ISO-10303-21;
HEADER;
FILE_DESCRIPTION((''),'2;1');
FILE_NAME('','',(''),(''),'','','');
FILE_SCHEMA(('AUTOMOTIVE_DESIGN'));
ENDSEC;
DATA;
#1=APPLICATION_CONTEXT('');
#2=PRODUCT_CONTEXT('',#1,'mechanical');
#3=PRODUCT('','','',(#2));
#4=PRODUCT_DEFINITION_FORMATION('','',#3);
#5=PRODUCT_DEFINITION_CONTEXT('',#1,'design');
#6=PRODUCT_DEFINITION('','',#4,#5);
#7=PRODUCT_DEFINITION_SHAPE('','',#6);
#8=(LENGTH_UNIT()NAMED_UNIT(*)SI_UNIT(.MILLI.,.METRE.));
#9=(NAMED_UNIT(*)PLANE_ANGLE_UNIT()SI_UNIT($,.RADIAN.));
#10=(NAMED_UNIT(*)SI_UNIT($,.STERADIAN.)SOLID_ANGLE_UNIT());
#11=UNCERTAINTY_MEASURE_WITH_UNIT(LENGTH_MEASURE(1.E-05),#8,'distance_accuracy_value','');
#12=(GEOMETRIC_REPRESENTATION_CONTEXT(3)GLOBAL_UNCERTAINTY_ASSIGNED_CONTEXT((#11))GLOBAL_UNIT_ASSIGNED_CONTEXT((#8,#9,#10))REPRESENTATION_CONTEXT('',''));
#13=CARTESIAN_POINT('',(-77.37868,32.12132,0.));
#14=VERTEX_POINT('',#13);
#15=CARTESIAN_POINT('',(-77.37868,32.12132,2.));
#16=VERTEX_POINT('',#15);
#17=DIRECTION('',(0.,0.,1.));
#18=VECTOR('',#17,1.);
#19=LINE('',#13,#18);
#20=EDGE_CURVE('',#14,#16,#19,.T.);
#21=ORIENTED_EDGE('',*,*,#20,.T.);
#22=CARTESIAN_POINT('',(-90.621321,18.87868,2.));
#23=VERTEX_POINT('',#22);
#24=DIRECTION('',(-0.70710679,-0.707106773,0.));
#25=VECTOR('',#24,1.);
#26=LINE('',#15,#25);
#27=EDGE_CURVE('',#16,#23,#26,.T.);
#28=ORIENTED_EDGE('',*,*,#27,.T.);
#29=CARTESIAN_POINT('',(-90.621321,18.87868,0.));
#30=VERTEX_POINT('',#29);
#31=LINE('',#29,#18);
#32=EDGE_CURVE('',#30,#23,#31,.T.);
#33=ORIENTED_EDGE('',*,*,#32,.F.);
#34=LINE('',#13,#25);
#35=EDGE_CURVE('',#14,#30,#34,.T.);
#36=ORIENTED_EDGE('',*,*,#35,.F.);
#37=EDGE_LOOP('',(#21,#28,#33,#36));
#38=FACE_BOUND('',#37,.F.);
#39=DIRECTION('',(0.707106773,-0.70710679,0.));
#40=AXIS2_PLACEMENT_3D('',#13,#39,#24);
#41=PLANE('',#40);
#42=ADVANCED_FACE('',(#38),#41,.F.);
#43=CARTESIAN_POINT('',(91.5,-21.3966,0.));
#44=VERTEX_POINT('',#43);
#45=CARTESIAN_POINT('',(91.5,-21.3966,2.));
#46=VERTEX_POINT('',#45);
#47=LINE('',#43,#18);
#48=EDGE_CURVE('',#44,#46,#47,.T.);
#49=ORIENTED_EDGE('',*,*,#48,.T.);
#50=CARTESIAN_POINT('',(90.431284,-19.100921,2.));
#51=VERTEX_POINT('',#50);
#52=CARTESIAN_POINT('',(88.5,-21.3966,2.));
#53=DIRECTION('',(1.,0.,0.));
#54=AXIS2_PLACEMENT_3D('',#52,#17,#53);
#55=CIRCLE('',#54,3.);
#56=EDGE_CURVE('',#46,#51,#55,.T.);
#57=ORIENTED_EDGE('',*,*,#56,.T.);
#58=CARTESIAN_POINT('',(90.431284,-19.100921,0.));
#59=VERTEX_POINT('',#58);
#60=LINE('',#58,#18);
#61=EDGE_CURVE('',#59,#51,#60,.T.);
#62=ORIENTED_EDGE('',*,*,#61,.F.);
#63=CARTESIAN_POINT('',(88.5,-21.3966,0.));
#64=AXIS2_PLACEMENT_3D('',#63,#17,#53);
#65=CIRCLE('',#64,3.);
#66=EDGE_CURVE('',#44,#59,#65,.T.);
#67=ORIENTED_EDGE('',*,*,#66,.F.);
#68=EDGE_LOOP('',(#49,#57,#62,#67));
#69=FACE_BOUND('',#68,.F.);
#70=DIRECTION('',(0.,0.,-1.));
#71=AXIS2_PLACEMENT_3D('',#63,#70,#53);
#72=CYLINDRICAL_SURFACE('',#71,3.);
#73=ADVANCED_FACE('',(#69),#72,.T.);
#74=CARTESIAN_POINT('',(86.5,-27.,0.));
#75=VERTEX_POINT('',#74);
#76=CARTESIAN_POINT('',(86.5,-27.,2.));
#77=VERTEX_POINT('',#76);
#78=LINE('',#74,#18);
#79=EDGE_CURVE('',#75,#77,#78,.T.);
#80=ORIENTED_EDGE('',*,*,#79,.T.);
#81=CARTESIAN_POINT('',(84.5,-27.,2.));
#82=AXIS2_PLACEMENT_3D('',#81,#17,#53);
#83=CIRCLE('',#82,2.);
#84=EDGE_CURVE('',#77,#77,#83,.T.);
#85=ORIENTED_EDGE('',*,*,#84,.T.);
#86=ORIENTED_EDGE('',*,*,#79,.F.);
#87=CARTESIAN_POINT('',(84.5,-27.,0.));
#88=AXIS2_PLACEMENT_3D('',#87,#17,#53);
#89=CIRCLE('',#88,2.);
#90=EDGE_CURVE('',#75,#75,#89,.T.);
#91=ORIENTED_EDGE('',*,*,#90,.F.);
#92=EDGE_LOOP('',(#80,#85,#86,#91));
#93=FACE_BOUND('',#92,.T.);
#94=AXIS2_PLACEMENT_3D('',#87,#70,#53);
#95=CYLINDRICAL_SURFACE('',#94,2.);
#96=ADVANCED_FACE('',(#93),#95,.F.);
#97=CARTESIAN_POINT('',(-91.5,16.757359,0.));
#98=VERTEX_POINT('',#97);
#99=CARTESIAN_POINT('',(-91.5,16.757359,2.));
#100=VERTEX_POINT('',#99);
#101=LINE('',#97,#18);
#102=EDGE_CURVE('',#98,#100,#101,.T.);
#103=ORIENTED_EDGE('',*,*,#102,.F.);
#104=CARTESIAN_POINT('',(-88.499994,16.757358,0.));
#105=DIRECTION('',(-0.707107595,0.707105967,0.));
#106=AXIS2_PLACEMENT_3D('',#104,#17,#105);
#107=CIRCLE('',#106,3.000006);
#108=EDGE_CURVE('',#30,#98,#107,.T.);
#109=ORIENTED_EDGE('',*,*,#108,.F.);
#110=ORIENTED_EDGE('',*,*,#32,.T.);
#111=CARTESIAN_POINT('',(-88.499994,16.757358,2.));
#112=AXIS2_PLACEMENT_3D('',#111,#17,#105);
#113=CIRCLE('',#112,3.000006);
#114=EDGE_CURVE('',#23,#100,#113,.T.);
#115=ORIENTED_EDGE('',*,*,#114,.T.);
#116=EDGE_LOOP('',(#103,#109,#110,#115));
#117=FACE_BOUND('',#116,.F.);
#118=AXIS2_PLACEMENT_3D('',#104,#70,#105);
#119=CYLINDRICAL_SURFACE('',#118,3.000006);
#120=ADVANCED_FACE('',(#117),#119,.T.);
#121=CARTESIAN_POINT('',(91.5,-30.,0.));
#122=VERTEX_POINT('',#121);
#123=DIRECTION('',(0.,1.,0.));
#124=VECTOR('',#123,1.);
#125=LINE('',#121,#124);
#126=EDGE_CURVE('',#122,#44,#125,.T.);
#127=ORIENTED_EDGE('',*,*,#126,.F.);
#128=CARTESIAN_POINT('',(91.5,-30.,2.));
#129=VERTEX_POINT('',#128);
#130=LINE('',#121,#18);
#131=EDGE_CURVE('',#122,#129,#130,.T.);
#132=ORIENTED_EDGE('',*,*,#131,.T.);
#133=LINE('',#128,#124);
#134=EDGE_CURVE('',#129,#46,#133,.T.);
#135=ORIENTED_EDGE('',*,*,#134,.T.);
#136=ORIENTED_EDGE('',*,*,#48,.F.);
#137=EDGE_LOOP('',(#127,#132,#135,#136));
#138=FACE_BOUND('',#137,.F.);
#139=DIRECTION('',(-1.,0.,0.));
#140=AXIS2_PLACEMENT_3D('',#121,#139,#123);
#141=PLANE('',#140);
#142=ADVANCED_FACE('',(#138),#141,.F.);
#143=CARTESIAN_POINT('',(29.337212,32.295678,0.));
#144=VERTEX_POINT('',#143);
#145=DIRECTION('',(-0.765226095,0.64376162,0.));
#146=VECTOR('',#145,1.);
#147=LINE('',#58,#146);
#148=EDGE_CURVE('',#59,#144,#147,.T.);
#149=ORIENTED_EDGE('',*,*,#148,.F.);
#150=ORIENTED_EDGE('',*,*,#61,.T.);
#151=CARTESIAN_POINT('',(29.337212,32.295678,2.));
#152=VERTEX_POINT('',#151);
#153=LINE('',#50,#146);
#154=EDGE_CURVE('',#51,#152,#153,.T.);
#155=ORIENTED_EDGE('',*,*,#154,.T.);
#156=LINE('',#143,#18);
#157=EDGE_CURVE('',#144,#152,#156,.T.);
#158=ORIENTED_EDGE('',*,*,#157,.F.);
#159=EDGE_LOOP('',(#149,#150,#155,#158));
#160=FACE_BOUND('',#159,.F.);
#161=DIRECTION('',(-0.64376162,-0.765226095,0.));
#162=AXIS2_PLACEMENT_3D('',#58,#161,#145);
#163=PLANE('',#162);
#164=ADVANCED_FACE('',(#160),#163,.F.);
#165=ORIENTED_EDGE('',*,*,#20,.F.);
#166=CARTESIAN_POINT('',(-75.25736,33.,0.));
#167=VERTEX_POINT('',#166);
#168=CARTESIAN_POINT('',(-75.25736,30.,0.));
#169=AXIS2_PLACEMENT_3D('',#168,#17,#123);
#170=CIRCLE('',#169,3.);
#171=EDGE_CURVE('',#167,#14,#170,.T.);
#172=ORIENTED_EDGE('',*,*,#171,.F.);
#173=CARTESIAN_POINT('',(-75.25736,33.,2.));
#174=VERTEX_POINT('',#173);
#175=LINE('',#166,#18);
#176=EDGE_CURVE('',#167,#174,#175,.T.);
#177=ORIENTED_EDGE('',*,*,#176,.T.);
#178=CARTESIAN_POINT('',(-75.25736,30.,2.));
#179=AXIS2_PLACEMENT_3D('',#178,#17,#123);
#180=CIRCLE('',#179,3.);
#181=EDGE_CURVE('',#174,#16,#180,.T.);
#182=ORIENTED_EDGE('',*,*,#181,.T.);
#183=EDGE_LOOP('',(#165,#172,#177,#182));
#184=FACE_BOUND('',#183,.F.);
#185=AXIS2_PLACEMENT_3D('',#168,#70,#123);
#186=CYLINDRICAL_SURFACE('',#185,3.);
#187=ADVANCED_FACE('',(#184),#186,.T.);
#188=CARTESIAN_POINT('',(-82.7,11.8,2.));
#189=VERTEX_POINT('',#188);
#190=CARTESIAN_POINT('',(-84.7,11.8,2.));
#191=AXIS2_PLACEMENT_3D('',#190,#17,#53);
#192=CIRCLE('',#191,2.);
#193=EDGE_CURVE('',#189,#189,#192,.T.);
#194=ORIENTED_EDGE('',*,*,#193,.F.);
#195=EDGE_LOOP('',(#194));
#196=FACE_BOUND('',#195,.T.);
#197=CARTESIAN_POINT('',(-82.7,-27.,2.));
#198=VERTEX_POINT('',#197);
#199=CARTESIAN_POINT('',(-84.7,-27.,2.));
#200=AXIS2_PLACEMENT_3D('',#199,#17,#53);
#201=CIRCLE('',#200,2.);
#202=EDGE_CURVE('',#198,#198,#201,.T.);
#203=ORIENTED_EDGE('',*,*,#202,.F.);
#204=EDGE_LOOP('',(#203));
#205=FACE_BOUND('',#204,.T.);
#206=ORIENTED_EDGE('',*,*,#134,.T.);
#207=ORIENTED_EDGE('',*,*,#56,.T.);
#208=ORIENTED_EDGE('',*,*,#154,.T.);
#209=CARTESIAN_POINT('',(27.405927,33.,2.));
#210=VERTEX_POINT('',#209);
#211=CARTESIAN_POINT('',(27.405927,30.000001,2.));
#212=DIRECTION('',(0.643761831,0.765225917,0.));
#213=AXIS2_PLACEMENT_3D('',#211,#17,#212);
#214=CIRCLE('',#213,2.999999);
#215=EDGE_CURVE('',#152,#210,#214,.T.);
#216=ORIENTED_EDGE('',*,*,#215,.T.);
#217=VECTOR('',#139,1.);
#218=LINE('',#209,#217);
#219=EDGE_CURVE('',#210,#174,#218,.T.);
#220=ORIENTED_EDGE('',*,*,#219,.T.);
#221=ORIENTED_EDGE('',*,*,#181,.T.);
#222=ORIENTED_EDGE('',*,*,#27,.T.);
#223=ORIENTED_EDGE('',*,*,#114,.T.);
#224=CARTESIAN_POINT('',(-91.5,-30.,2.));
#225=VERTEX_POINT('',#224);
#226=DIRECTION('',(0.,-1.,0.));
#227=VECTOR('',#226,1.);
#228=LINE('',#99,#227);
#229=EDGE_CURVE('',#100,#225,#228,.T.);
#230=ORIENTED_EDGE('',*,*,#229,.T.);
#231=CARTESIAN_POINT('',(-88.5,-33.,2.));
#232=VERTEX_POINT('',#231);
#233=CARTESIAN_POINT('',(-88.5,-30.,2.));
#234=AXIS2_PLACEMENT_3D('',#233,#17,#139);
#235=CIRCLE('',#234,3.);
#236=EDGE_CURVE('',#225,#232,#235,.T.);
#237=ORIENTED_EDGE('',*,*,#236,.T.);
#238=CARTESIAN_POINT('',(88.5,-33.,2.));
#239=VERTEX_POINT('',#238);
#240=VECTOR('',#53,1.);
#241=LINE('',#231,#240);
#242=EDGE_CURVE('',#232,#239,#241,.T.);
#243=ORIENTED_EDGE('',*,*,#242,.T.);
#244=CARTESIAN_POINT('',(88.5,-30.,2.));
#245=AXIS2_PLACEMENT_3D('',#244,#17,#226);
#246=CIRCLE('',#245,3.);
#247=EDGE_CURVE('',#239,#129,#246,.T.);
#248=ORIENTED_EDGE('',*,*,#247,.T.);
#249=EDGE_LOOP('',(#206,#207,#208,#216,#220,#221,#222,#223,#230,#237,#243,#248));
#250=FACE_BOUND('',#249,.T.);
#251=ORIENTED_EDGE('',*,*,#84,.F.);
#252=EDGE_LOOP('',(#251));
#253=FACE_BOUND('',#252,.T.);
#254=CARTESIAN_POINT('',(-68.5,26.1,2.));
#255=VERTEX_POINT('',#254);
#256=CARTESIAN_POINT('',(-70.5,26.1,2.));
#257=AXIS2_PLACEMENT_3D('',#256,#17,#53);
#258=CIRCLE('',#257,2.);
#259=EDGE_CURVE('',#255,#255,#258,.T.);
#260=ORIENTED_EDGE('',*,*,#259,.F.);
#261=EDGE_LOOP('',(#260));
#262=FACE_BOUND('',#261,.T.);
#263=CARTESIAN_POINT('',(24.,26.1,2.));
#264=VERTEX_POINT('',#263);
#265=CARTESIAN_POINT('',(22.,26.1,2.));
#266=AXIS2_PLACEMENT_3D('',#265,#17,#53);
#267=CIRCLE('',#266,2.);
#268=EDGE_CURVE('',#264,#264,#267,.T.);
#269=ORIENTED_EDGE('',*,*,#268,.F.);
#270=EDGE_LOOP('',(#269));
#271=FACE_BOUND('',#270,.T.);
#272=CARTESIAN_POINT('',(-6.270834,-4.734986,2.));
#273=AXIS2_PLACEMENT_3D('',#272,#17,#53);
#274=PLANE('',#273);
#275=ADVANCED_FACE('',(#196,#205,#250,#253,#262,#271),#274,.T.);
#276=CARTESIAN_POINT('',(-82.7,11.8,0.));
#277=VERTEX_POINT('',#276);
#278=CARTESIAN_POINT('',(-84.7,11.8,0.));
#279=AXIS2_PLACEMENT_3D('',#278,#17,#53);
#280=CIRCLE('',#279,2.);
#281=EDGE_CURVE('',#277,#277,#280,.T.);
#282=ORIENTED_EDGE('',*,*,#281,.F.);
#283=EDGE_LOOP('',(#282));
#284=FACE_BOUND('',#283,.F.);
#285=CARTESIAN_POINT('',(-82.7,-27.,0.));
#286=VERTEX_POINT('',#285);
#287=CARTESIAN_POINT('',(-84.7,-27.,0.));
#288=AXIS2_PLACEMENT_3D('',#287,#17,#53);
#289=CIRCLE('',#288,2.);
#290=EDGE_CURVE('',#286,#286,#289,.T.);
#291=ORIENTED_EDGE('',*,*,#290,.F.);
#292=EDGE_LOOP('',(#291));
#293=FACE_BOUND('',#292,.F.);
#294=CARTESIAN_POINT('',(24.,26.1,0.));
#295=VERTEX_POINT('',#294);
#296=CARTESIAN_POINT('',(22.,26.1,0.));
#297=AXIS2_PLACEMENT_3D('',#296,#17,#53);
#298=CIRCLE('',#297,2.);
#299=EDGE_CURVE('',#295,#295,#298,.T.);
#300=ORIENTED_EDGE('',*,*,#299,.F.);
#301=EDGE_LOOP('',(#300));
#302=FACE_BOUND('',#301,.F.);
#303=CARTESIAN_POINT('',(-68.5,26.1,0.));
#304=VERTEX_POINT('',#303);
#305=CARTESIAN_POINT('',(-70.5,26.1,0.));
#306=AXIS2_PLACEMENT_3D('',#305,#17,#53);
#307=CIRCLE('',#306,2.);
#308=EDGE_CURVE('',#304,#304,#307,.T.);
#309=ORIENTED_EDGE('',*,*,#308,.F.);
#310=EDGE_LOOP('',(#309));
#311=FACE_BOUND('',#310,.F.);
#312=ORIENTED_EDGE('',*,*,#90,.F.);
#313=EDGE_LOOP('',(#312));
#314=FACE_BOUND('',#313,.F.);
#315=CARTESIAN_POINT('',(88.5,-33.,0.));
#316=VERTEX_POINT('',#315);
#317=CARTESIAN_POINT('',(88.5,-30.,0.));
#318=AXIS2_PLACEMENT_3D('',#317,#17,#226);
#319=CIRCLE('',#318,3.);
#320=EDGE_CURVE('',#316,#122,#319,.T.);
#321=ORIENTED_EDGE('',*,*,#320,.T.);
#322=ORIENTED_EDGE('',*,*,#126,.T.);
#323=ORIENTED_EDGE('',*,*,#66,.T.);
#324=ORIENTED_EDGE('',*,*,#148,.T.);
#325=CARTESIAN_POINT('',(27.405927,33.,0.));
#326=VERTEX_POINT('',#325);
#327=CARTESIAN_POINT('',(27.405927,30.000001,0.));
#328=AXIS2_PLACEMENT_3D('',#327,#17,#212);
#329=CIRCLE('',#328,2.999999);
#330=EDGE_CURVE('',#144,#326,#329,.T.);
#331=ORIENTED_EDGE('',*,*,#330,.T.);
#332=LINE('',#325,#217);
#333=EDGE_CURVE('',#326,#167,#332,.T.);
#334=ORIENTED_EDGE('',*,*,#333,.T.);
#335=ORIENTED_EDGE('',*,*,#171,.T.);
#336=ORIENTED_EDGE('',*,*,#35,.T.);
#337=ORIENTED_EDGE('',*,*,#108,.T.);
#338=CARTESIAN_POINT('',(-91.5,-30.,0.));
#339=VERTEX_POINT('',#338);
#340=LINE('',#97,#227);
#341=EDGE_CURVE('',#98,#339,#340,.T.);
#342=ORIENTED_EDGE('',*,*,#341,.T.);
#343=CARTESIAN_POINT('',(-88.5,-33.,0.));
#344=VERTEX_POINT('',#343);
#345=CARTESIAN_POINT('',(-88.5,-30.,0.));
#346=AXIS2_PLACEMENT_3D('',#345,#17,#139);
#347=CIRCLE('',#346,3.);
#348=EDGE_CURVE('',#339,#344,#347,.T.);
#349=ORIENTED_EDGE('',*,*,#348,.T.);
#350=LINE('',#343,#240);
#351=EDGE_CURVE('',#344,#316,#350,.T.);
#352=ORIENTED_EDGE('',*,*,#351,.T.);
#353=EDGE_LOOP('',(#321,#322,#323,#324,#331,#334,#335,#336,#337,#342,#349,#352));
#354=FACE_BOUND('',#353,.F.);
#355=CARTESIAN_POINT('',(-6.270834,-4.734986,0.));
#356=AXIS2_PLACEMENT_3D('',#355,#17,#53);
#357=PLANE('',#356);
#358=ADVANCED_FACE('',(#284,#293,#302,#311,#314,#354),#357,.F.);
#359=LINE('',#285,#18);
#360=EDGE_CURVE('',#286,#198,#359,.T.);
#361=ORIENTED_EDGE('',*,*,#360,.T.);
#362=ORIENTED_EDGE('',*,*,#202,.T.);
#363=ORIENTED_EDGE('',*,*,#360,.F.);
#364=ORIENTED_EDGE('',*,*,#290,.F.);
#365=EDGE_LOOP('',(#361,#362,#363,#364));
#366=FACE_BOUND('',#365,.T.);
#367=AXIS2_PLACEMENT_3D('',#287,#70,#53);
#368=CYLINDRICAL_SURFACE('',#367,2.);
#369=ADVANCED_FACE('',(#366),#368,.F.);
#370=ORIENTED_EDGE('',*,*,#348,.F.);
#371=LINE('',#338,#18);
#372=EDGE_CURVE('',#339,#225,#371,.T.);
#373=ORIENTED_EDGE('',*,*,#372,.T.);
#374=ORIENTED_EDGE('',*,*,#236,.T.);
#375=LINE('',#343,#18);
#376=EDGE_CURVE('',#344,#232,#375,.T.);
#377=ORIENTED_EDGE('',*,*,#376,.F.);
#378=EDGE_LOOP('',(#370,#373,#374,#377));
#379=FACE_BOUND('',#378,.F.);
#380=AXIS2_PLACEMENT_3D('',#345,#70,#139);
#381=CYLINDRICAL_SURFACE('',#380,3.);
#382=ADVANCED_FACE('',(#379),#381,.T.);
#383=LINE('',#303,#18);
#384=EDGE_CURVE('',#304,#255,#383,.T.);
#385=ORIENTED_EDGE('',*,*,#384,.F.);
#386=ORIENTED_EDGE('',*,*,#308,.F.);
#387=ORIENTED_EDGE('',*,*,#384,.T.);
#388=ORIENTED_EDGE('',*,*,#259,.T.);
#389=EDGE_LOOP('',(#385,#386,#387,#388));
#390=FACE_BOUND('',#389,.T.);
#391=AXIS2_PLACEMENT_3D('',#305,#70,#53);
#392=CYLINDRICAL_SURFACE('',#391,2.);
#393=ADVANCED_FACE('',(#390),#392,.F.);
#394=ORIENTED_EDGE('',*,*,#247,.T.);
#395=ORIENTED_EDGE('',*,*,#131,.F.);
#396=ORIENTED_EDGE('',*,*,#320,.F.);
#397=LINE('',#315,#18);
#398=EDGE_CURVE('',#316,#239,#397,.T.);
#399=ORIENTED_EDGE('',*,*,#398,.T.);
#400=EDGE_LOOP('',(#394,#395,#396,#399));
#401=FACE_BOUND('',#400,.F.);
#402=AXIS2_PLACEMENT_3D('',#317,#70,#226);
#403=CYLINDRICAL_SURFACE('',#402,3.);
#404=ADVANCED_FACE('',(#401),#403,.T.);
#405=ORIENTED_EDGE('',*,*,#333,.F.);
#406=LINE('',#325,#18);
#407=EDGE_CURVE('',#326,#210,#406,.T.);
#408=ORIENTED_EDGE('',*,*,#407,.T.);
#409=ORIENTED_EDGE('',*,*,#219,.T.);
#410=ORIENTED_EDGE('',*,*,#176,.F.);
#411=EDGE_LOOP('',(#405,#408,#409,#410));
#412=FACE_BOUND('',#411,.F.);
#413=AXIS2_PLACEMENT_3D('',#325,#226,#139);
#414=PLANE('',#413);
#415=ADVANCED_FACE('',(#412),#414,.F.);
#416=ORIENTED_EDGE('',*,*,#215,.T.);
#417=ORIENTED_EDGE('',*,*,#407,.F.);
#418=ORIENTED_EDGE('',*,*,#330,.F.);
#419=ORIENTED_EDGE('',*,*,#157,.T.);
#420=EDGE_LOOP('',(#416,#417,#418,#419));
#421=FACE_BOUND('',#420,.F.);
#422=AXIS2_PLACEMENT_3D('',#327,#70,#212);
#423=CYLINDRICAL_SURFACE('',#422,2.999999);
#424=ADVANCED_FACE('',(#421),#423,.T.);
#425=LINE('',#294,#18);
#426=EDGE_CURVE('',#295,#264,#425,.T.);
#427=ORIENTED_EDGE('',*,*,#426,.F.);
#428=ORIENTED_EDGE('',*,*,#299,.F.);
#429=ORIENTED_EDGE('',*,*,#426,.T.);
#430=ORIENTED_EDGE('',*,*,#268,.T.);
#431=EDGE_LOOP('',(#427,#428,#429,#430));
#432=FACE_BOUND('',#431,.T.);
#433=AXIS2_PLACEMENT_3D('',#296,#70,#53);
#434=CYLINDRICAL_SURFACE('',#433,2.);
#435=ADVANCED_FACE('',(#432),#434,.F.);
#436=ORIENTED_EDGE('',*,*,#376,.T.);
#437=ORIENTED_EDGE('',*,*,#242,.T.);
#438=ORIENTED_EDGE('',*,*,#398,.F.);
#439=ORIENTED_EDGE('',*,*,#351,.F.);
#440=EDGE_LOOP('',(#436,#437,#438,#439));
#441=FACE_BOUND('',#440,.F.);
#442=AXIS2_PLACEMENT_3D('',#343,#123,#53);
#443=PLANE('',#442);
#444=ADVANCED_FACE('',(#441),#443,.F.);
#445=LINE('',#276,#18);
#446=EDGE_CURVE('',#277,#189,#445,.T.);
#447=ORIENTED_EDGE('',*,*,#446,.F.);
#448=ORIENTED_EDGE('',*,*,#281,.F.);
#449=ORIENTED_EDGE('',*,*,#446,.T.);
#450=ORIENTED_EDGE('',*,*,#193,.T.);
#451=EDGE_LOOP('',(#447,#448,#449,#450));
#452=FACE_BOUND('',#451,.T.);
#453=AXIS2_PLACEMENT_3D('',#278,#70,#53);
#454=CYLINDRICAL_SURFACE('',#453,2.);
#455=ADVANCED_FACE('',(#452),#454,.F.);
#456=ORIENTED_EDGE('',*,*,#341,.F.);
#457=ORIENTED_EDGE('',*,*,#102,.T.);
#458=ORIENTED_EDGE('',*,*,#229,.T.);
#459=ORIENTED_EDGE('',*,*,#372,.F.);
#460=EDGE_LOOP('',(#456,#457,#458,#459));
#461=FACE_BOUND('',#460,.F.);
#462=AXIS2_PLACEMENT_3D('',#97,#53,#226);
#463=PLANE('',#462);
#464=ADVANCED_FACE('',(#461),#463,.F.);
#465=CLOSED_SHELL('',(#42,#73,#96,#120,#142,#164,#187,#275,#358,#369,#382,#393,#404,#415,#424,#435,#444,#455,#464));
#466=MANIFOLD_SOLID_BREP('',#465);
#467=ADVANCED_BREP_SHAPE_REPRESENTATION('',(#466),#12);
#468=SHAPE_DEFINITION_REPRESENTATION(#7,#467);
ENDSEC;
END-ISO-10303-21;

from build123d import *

# Parameters (mm, degrees)
F0_R     = 2
F1_DEPTH = 2


# Not quite as in the source:
# - ends of sketch curves that miss each other by under 0.0002 mm in the source are joined


with BuildPart() as f1:
    # F0 (on Top) → F1 (new body)
    with BuildSketch(Plane.XY):
        with BuildLine():
            ThreePointArc((91.5, -21.3966), (91.2197291677, -20.1304747082), (90.4312844969, -19.1009214093))
            Line((90.4312844969, -19.1009214093), (29.337212, 32.295678))
            ThreePointArc((29.337212, 32.295678), (28.4337805172, 32.818424586), (27.405927, 33))
            Line((27.405927, 33), (-75.25736, 33))
            ThreePointArc((-75.25736, 33), (-76.4054102971, 32.7716385975), (-77.3786803436, 32.1213203436))
            Line((-77.3786803436, 32.1213203436), (-90.621321, 18.87868))
            ThreePointArc((-90.621321, 18.87868), (-91.2716385975, 17.9054092971), (-91.5, 16.757359))
            Line((-91.5, 16.757359), (-91.5, -30))
            ThreePointArc((-91.5, -30), (-90.6213203436, -32.1213203436), (-88.5, -33))
            Line((-88.5, -33), (88.5, -33))
            ThreePointArc((88.5, -33), (90.6213203436, -32.1213203436), (91.5, -30))
            Line((91.5, -30), (91.5, -21.3966))
        make_face()
        with Locations((-84.7, -27)):
            Circle(F0_R, mode=Mode.SUBTRACT)
        with Locations((84.5, -27)):
            Circle(F0_R, mode=Mode.SUBTRACT)
        with Locations((-84.7, 11.8)):
            Circle(F0_R, mode=Mode.SUBTRACT)
        with Locations((-70.5, 26.1)):
            Circle(F0_R, mode=Mode.SUBTRACT)
        with Locations((22, 26.1)):
            Circle(F0_R, mode=Mode.SUBTRACT)
    extrude(amount=F1_DEPTH)


solid = f1.part
